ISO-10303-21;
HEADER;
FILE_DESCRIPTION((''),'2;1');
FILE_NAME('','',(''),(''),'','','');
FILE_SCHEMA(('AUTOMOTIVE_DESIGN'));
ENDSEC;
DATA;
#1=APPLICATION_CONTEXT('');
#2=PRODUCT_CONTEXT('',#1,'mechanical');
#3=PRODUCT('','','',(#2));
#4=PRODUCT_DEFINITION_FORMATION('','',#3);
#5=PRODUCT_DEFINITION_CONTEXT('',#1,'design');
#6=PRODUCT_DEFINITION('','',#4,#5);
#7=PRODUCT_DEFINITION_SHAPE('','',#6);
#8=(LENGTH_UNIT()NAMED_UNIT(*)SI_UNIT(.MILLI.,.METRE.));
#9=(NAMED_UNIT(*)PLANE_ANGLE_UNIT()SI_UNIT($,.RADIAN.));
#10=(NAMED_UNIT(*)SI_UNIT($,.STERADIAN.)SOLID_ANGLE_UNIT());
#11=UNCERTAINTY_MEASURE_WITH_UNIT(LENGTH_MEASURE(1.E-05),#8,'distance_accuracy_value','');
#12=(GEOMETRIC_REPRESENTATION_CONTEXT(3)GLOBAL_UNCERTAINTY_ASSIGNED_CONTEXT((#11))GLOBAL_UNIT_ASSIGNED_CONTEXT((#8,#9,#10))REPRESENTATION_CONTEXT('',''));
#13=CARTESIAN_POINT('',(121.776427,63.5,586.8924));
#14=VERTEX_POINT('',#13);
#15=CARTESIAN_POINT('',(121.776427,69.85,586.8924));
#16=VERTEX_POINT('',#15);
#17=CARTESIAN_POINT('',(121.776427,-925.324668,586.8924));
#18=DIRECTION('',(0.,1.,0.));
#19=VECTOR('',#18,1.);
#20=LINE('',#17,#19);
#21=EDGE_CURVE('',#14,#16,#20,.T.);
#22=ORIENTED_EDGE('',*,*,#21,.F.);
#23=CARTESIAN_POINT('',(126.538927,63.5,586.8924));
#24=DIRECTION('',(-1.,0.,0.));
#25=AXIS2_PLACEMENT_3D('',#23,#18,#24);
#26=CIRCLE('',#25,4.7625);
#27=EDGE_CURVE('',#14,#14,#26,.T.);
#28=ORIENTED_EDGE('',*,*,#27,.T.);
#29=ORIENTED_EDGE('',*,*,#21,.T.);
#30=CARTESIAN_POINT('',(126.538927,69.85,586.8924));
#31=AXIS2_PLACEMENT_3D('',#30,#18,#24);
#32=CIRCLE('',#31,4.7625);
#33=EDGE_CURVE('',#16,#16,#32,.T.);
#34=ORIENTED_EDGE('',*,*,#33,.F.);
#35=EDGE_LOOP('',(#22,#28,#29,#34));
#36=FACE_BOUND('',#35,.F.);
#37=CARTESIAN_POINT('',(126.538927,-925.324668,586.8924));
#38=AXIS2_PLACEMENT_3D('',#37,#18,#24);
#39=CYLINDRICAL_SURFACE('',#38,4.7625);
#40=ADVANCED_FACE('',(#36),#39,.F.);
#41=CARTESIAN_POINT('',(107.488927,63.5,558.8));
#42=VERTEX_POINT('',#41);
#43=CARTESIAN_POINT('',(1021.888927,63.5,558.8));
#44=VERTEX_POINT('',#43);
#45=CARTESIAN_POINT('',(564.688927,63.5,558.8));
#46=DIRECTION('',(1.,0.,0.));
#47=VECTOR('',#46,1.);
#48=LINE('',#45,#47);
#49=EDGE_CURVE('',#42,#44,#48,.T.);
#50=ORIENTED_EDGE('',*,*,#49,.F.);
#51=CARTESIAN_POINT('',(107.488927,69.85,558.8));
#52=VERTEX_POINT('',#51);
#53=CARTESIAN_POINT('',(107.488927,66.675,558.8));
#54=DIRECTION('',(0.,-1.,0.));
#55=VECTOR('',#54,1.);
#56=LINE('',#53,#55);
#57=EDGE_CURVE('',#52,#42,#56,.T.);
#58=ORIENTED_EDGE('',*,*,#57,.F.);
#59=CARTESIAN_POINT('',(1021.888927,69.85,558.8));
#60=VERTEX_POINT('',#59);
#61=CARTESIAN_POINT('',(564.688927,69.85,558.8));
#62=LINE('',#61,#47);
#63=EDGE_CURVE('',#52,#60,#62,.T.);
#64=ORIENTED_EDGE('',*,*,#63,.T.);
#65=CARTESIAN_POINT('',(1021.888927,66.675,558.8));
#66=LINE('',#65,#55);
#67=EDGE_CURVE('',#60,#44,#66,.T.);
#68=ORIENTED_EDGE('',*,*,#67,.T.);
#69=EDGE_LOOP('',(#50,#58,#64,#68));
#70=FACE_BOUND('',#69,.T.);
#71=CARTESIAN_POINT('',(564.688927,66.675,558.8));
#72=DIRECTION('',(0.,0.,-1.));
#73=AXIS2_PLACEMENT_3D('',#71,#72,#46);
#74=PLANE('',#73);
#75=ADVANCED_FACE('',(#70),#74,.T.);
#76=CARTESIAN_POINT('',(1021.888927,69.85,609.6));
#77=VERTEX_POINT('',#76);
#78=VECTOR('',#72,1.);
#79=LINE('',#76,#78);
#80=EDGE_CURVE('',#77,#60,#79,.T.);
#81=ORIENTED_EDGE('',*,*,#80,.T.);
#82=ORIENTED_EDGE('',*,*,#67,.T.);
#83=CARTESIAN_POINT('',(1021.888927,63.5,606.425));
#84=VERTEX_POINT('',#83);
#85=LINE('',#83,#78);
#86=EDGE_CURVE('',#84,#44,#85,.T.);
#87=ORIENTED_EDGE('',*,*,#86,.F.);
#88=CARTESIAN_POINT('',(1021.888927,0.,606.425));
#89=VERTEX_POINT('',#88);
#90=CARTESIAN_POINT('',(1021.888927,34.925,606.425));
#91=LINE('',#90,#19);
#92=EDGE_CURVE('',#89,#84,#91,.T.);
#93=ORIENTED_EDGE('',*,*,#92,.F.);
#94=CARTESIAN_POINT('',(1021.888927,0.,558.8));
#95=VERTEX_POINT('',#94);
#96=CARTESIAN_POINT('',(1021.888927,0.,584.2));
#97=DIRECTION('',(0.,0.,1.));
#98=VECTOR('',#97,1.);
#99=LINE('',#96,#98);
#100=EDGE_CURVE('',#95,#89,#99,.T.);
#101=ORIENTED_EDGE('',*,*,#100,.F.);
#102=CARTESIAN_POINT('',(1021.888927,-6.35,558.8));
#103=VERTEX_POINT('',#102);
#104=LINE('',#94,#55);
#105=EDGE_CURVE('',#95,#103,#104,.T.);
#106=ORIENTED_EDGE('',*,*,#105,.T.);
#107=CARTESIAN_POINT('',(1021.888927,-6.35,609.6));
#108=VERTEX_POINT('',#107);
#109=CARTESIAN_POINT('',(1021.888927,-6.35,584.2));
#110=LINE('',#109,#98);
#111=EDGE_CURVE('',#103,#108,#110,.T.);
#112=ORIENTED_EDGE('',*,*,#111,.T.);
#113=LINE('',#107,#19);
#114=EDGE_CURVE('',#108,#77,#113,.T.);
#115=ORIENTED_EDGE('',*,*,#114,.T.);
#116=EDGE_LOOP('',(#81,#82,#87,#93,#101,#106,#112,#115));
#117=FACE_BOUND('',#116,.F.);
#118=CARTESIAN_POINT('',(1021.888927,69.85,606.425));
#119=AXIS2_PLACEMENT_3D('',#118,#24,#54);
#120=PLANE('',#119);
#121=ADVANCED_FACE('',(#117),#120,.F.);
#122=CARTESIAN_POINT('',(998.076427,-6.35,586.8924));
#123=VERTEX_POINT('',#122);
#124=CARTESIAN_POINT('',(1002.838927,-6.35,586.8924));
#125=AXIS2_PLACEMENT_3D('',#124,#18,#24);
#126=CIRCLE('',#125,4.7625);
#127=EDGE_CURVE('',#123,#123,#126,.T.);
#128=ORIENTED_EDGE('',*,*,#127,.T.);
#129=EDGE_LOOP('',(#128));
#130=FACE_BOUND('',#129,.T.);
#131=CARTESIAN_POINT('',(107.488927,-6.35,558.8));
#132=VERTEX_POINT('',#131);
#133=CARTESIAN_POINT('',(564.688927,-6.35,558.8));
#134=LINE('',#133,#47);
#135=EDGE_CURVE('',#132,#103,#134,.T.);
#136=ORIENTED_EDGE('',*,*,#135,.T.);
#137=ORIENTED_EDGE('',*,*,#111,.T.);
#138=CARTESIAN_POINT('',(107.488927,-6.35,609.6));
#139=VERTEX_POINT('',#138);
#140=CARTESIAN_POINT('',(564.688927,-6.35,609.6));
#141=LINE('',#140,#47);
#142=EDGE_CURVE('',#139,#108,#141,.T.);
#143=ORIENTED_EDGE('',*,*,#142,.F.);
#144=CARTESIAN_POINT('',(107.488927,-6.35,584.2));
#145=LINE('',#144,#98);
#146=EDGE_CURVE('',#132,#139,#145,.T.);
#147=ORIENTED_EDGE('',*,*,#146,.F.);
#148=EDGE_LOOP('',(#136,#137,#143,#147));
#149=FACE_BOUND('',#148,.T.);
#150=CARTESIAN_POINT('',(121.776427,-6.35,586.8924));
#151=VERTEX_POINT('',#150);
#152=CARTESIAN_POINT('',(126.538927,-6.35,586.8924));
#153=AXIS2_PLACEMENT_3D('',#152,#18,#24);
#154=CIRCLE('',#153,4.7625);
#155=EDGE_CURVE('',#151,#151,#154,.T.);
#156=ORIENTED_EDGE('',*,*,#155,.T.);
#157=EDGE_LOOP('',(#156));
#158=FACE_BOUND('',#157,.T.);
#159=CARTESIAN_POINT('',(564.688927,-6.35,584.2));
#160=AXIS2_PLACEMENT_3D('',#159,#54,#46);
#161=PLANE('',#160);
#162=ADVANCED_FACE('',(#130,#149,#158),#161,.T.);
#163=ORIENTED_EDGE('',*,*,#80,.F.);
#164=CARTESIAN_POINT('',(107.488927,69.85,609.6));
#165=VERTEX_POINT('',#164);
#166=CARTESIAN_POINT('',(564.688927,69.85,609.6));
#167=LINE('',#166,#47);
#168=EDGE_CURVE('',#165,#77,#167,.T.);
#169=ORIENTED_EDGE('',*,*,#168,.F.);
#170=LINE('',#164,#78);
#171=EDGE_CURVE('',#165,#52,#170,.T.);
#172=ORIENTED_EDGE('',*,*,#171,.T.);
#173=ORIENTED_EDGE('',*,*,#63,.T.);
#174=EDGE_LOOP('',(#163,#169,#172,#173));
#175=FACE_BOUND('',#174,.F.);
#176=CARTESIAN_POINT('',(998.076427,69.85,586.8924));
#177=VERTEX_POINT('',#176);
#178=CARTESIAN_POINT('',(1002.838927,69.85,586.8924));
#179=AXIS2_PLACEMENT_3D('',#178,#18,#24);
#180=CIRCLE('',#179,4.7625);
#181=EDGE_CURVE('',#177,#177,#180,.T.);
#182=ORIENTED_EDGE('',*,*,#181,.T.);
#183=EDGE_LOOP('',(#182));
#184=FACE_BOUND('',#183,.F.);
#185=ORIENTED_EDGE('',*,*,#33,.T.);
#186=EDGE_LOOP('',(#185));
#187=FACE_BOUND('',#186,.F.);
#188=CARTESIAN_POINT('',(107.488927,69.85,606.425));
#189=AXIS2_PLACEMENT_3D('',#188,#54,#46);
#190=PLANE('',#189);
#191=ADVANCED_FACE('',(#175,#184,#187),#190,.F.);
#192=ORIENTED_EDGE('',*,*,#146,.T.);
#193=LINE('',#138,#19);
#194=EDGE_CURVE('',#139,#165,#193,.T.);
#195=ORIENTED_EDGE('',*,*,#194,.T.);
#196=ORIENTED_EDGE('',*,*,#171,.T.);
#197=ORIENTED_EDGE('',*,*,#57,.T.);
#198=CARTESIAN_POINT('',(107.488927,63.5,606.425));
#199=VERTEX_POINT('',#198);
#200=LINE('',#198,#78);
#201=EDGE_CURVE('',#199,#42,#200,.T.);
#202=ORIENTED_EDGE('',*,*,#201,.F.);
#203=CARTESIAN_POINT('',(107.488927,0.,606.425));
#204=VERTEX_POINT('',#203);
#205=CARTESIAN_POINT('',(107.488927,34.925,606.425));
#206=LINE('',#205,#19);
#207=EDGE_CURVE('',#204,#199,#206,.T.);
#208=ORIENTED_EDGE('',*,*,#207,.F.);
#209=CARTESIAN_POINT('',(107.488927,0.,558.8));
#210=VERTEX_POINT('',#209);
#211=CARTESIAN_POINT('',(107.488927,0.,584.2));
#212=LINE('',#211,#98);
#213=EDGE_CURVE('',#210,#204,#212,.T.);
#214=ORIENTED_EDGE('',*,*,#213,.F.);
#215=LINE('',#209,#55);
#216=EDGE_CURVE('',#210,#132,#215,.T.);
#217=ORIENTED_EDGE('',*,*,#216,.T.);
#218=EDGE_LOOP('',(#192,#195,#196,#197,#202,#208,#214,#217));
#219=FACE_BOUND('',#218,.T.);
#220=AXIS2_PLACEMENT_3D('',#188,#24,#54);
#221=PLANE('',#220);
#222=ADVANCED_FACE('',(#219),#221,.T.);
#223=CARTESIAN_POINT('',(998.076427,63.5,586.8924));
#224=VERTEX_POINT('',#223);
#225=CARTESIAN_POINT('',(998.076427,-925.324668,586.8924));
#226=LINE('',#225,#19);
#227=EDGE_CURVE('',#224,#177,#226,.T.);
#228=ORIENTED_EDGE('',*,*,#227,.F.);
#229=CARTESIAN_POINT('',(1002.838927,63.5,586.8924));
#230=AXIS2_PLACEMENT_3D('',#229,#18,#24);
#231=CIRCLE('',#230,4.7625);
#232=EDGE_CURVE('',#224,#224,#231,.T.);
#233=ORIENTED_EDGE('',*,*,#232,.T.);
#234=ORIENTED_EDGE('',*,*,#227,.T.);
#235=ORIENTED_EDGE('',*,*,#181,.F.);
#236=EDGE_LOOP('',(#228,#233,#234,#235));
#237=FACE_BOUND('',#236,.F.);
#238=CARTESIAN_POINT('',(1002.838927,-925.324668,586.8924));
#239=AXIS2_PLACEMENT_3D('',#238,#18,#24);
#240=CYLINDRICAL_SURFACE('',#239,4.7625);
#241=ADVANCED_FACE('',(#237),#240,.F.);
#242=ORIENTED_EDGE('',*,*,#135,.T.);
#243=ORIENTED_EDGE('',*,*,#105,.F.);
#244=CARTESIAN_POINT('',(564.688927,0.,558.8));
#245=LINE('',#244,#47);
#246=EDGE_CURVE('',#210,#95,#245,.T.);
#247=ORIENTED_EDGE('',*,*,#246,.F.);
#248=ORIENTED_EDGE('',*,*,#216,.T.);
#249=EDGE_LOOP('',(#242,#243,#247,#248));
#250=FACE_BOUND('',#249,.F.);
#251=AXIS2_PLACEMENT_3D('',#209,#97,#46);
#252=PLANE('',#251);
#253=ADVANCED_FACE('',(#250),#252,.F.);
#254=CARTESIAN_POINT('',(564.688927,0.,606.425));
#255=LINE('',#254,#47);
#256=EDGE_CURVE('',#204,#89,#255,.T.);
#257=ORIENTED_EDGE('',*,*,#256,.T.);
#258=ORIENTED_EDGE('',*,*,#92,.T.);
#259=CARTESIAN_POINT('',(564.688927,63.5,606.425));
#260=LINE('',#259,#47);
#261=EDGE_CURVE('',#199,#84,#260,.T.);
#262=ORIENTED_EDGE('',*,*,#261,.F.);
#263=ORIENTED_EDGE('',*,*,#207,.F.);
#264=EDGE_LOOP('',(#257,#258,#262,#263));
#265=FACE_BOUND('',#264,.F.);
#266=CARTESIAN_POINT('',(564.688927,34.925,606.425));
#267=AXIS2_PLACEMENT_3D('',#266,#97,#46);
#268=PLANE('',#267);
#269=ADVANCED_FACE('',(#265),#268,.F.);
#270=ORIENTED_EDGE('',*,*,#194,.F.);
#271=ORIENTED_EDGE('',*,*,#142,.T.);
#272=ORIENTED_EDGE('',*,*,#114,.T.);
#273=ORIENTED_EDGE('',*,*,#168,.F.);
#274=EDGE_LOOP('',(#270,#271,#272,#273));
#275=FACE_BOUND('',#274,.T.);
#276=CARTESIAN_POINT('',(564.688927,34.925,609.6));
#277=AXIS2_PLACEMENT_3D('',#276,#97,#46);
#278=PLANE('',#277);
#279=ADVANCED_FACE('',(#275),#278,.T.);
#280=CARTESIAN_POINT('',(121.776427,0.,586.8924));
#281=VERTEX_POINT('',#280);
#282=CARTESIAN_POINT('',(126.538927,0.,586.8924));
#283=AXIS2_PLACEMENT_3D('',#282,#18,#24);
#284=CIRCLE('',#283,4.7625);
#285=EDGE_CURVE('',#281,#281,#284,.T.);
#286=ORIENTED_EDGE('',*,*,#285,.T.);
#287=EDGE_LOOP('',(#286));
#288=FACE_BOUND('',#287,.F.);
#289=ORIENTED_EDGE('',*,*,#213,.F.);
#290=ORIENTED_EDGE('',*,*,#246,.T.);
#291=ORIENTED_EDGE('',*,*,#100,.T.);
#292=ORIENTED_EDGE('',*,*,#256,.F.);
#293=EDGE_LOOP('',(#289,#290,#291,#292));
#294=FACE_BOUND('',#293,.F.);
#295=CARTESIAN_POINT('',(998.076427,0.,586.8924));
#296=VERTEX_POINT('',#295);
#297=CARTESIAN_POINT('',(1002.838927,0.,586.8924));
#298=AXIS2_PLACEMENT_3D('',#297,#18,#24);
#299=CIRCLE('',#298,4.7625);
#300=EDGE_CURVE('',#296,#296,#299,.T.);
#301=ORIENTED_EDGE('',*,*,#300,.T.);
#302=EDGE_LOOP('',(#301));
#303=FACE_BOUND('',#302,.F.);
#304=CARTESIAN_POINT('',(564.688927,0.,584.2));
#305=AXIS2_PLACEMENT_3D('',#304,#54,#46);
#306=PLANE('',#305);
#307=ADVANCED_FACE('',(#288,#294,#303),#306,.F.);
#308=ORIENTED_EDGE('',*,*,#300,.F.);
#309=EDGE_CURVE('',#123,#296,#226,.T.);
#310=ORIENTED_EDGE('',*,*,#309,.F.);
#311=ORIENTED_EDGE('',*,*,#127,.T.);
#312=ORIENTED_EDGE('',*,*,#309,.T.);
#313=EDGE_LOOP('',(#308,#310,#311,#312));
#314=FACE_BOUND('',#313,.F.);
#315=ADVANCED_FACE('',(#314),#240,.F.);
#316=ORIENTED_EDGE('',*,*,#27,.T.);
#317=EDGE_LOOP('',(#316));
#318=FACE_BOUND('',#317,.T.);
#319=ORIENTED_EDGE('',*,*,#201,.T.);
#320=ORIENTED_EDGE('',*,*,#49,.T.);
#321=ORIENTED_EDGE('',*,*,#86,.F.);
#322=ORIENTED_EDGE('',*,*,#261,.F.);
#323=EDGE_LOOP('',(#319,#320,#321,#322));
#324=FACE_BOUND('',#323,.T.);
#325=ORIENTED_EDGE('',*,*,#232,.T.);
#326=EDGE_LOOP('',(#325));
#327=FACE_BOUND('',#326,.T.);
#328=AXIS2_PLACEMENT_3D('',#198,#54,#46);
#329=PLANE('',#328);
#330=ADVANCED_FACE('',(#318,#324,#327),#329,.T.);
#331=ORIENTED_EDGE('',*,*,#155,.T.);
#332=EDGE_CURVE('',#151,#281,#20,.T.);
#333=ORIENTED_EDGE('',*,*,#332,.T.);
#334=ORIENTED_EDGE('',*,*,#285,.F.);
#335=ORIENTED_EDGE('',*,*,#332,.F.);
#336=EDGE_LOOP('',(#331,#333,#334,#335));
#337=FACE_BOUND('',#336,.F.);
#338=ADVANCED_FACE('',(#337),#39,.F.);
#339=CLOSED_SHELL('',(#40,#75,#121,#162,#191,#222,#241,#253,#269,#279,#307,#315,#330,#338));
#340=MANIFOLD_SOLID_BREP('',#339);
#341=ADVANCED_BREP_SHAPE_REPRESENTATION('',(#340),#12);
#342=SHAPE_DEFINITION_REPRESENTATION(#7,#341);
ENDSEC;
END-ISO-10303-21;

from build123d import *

# Parameters (mm, degrees)
F0_W     = 914.4
F0_H     = 50.8
F1_DEPTH = 6.35
F2_W     = 914.4
F2_H     = 69.85
F3_DEPTH = 3.175
F4_W     = 914.4
F4_H     = 6.35
F5_DEPTH = 47.625
F7_D     = 9.525


with BuildPart() as f1:
    # F0 (on Front) → F1 (new body)
    with BuildSketch(Plane.XZ):
        with Locations((564.6889274399, 584.2)):
            Rectangle(F0_W, F0_H)
    extrude(amount=F1_DEPTH)

    # F2 (on face) → F3 (join)
    with BuildSketch(Plane.XY.offset(609.6)):
        with Locations((564.6889274399, 34.925)):
            Rectangle(F2_W, F2_H)
    extrude(amount=-F3_DEPTH)

    # F4 (on face) → F5 (join, through all)
    with BuildSketch(Plane(origin=(0, 0, 606.425), x_dir=(1, 0, 0), z_dir=(0, 0, -1))):
        with Locations((564.6889274399, -66.675)):
            Rectangle(F4_W, F4_H)
    extrude(amount=F5_DEPTH)

    # F7 (through all)
    with Locations(Plane.XZ.offset(6.35)):
        with Locations((126.5389274399, 586.8924), (1002.8389274399, 586.8924)):
            Hole(F7_D / 2)


solid = f1.part
